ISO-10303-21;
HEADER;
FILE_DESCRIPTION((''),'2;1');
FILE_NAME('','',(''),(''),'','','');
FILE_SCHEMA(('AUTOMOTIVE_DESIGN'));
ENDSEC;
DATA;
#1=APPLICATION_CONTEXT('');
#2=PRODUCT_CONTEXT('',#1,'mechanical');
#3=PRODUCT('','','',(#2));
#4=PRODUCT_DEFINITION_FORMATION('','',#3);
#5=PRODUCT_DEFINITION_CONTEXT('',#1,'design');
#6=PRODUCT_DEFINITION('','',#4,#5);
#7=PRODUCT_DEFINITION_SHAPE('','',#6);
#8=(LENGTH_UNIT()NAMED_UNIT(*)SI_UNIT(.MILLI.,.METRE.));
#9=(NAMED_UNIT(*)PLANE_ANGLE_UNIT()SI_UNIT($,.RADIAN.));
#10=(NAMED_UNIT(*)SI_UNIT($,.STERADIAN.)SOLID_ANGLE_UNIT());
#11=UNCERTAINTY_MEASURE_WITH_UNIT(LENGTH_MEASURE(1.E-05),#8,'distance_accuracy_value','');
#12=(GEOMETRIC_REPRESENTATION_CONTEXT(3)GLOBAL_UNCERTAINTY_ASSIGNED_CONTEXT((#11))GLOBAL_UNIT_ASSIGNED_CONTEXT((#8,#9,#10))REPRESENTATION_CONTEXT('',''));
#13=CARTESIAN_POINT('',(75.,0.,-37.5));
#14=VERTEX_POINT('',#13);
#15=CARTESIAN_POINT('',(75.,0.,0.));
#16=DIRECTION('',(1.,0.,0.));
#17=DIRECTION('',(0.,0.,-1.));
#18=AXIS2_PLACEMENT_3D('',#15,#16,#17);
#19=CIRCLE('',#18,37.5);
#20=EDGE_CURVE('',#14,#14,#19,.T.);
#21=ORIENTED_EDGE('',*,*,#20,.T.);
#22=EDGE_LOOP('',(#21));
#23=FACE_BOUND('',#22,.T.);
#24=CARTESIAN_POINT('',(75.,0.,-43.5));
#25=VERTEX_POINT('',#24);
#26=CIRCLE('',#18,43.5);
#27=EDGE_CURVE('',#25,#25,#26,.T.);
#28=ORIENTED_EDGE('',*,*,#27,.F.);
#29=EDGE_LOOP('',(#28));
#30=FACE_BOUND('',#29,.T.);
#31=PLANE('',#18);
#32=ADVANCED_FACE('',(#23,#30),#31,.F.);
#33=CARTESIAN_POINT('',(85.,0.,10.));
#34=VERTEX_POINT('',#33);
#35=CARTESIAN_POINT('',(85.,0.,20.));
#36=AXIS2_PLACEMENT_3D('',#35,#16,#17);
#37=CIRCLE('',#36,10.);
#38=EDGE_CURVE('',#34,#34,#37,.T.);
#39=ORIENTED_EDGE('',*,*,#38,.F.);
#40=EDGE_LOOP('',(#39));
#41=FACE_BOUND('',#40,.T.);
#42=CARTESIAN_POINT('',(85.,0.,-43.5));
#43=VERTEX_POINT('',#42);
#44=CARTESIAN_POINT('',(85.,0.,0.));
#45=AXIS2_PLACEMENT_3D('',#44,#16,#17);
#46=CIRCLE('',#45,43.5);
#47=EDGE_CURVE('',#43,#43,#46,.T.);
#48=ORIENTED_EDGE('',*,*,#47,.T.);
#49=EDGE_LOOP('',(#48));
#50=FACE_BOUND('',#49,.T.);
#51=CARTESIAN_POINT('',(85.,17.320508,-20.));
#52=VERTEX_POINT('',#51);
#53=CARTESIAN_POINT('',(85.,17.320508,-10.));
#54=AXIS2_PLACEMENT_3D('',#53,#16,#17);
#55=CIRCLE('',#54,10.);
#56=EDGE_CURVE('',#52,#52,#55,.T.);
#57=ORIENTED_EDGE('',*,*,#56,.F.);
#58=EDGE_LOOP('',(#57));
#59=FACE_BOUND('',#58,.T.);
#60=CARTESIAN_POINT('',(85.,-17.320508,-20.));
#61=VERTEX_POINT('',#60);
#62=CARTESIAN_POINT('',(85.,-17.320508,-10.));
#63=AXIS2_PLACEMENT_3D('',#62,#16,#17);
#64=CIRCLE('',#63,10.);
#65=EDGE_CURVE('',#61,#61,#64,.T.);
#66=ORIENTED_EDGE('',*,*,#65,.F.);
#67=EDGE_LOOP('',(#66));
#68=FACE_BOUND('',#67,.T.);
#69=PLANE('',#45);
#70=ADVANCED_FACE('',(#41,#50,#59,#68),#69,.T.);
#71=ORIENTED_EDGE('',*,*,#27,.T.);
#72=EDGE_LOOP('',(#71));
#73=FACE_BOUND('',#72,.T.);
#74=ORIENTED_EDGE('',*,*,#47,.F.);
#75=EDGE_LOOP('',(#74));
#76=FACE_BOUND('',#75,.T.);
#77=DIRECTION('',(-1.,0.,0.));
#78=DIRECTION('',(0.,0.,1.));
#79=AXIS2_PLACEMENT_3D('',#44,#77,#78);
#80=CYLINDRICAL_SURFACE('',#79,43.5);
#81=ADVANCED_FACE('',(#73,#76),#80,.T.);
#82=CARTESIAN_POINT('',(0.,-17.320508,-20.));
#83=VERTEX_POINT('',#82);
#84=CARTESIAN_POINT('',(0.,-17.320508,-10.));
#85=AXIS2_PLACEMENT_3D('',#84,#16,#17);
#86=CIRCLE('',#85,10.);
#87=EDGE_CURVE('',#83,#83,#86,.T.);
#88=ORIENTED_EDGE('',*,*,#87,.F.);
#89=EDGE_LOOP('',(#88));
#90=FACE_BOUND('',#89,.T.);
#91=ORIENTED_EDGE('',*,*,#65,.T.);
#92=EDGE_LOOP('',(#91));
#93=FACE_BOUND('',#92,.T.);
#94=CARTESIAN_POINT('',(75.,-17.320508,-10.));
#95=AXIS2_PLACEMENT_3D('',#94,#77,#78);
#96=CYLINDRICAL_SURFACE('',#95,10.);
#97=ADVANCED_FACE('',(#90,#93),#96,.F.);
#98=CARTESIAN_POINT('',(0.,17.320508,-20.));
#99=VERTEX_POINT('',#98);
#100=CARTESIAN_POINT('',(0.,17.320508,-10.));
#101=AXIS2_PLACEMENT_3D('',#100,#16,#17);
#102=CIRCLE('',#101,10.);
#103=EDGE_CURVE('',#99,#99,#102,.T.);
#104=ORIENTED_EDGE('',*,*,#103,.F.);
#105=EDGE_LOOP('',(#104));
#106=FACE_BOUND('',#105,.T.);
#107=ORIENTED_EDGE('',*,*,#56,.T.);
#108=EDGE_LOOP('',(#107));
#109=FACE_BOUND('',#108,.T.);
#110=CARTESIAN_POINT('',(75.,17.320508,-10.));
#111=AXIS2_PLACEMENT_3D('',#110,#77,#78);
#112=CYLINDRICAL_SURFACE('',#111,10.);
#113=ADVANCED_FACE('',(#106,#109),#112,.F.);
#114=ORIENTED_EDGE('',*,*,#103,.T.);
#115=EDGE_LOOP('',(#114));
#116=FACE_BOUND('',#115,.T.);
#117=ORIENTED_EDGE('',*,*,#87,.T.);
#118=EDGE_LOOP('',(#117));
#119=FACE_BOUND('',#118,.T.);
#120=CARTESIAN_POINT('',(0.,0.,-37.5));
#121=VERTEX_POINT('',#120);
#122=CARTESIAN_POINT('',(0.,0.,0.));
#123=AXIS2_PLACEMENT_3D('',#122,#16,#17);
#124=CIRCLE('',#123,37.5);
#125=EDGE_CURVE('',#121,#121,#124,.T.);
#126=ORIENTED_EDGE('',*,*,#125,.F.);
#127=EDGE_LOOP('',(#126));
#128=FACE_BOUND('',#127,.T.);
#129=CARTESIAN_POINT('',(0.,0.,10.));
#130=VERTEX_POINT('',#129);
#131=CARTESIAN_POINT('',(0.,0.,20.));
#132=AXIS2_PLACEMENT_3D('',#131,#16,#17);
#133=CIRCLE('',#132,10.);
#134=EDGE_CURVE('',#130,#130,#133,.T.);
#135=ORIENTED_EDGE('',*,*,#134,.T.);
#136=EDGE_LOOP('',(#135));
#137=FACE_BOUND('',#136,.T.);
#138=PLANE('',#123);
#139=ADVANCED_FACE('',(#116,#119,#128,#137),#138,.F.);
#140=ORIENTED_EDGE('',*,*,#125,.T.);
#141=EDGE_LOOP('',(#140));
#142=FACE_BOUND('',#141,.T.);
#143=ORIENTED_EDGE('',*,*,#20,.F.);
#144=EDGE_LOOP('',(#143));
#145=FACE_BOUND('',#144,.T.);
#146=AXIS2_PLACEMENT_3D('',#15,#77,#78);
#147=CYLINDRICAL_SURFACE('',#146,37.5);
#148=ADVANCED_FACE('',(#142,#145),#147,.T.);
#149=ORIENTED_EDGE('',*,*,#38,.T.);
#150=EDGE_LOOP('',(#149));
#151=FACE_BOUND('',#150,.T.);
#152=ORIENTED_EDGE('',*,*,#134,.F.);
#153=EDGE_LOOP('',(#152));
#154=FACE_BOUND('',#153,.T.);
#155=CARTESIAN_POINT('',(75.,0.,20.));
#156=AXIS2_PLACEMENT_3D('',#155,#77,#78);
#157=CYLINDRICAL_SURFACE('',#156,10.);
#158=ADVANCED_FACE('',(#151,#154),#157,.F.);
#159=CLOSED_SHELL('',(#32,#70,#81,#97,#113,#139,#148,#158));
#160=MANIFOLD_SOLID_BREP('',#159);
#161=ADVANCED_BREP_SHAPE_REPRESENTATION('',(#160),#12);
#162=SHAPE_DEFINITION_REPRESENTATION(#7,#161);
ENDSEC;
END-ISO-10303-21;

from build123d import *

# Parameters (mm, degrees)
BOSS_EXTRUDE1_OUTLINE_R   = 37.5
BOSS_EXTRUDE1_OUTLINE_R_2 = 10
BOSS_EXTRUDE1_DEPTH       = 75
SKETCH3_R                 = 43.5
SKETCH3_R_2               = 10
BOSS_EXTRUDE2_DEPTH       = 10


# Read off the part's stored shape, not the designer's step: Boss-Extrude1
with BuildPart() as part:
    # Boss-Extrude1 outline → Boss-Extrude1 (new body)
    with BuildSketch(Plane(origin=(0, 0, 0), x_dir=(0, 0, -1), z_dir=(1, 0, 0))):
        Circle(BOSS_EXTRUDE1_OUTLINE_R)
        with Locations((10, -17.320508076)):
            Circle(BOSS_EXTRUDE1_OUTLINE_R_2, mode=Mode.SUBTRACT)
        with Locations((-20, 0)):
            Circle(BOSS_EXTRUDE1_OUTLINE_R_2, mode=Mode.SUBTRACT)
        with Locations((10, 17.320508076)):
            Circle(BOSS_EXTRUDE1_OUTLINE_R_2, mode=Mode.SUBTRACT)
    extrude(amount=BOSS_EXTRUDE1_DEPTH)

    # Sketch3 → Boss-Extrude2 (add)
    with BuildSketch(Plane(origin=(75, 0, 0), x_dir=(0, 0, -1), z_dir=(1, 0, 0))):
        Circle(SKETCH3_R)
        with Locations((-20, 0)):
            Circle(SKETCH3_R_2, mode=Mode.SUBTRACT)
        with Locations((10, 17.320508076)):
            Circle(SKETCH3_R_2, mode=Mode.SUBTRACT)
        with Locations((10, -17.320508076)):
            Circle(SKETCH3_R_2, mode=Mode.SUBTRACT)
    extrude(amount=BOSS_EXTRUDE2_DEPTH)


solid = part.part
